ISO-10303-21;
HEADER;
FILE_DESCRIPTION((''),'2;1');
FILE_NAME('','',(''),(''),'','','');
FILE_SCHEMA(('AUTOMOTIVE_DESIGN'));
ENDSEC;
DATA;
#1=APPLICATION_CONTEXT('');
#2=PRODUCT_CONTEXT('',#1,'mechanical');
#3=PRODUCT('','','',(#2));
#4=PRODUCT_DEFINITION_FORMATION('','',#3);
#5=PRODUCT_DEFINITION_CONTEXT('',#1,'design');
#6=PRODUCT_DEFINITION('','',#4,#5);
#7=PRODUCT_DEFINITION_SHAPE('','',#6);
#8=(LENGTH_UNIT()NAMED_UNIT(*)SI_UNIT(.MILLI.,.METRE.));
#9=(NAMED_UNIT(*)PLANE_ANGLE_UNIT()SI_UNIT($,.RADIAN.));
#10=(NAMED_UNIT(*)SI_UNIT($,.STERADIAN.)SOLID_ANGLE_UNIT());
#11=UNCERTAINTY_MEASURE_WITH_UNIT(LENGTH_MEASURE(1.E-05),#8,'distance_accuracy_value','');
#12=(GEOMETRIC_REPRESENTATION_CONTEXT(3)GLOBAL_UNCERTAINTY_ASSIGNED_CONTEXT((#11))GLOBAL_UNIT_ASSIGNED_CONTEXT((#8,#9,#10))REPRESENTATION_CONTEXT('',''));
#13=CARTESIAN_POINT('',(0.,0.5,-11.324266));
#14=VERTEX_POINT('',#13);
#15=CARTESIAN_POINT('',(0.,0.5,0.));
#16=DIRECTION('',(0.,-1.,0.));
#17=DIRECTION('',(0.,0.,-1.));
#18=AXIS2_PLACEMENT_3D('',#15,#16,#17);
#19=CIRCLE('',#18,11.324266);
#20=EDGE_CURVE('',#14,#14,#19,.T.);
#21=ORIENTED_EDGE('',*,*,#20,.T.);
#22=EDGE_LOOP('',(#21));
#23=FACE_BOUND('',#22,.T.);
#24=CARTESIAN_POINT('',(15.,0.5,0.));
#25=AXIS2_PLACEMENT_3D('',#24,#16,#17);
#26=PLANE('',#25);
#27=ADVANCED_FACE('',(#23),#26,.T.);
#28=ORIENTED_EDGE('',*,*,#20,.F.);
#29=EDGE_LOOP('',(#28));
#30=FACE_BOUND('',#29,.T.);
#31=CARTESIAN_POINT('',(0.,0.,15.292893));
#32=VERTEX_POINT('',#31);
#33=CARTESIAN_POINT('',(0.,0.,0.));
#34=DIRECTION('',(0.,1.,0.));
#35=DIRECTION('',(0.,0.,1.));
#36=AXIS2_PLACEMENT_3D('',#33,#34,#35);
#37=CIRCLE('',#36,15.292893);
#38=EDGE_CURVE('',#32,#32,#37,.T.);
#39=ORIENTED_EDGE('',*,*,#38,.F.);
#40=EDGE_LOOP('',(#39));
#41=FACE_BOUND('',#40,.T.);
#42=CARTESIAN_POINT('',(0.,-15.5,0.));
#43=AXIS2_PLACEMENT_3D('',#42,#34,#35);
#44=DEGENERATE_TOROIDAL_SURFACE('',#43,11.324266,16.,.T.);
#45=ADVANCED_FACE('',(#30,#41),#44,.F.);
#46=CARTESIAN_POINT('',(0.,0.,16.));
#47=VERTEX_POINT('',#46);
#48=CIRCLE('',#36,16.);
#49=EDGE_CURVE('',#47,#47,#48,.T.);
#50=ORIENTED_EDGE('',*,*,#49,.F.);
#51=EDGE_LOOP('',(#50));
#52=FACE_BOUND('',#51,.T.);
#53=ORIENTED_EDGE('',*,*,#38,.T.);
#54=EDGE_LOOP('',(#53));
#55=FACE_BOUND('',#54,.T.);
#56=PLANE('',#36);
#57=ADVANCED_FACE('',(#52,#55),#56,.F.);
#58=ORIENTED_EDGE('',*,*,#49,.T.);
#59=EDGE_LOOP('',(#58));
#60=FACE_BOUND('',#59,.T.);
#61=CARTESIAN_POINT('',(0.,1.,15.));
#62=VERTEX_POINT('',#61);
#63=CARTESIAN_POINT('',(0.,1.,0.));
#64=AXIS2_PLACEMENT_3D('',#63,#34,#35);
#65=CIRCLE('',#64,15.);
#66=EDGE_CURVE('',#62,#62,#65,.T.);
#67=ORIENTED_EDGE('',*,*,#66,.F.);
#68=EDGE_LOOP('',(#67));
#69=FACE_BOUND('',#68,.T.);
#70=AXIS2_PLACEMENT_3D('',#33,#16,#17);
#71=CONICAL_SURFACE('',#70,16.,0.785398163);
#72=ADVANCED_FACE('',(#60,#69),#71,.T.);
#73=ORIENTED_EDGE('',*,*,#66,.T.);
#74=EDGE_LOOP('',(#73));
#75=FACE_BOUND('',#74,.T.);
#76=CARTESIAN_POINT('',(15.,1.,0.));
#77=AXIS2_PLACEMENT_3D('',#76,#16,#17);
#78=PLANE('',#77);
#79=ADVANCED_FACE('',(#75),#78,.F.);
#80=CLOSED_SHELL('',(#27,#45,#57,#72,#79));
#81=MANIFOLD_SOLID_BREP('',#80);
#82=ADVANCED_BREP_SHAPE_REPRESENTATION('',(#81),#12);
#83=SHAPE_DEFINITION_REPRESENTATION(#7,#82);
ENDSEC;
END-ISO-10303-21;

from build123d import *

# Parameters (mm, degrees)
FOOT_SHELL_T  = -0.5
FOOT_FILLET_R = 16


with BuildPart() as part:
    # Sketch1 → Foot Revolve (revolve)
    with BuildSketch(Plane.XY, mode=Mode.PRIVATE) as foot_revolve_sk:
        Polygon((0, 0), (16, 0), (15, 1), (0, 1), align=None)
    revolve(foot_revolve_sk.sketch.rotate(Axis((0, 1, 0), (0, -1, 0)), 90), axis=Axis((0, 1, 0), (0, -1, 0)))

    # Foot Shell
    foot_shell_openings = [part.faces().sort_by_distance(p)[0] for p in [
        (0, 0, 0),
    ]]
    offset(amount=FOOT_SHELL_T, openings=foot_shell_openings, kind=Kind.INTERSECTION)

    # Foot Fillet
    # the kernel refuses this fillet: 16 mm, written as the material it adds along each edge
    with BuildSketch(Plane(origin=(0, 0.5, 0), x_dir=(0, 0, 1), z_dir=(-1, 0, 0))) as foot_fillet_piece_1:
        with BuildLine():
            CenterArc((11.324266252, -16), FOOT_FILLET_R, 75.638488437, 14.361511563)
            Line((11.324266252, 0), (11.324266252, 0.32))
            Line((11.324266252, 0.32), (14.792893219, 0.32))
            Line((14.792893219, 0.32), (15.019167389, 0.22627417))
            ThreePointArc((15.019167389, 0.22627417), (15.269167389, -0.02372583), (15.372265758, -0.19))
            Line((15.372265758, -0.19), (15.292893219, -0.5))
        make_face()
    revolve(axis=Axis((0, 0.5, 0), (0, 1, 0)))


solid = part.part
